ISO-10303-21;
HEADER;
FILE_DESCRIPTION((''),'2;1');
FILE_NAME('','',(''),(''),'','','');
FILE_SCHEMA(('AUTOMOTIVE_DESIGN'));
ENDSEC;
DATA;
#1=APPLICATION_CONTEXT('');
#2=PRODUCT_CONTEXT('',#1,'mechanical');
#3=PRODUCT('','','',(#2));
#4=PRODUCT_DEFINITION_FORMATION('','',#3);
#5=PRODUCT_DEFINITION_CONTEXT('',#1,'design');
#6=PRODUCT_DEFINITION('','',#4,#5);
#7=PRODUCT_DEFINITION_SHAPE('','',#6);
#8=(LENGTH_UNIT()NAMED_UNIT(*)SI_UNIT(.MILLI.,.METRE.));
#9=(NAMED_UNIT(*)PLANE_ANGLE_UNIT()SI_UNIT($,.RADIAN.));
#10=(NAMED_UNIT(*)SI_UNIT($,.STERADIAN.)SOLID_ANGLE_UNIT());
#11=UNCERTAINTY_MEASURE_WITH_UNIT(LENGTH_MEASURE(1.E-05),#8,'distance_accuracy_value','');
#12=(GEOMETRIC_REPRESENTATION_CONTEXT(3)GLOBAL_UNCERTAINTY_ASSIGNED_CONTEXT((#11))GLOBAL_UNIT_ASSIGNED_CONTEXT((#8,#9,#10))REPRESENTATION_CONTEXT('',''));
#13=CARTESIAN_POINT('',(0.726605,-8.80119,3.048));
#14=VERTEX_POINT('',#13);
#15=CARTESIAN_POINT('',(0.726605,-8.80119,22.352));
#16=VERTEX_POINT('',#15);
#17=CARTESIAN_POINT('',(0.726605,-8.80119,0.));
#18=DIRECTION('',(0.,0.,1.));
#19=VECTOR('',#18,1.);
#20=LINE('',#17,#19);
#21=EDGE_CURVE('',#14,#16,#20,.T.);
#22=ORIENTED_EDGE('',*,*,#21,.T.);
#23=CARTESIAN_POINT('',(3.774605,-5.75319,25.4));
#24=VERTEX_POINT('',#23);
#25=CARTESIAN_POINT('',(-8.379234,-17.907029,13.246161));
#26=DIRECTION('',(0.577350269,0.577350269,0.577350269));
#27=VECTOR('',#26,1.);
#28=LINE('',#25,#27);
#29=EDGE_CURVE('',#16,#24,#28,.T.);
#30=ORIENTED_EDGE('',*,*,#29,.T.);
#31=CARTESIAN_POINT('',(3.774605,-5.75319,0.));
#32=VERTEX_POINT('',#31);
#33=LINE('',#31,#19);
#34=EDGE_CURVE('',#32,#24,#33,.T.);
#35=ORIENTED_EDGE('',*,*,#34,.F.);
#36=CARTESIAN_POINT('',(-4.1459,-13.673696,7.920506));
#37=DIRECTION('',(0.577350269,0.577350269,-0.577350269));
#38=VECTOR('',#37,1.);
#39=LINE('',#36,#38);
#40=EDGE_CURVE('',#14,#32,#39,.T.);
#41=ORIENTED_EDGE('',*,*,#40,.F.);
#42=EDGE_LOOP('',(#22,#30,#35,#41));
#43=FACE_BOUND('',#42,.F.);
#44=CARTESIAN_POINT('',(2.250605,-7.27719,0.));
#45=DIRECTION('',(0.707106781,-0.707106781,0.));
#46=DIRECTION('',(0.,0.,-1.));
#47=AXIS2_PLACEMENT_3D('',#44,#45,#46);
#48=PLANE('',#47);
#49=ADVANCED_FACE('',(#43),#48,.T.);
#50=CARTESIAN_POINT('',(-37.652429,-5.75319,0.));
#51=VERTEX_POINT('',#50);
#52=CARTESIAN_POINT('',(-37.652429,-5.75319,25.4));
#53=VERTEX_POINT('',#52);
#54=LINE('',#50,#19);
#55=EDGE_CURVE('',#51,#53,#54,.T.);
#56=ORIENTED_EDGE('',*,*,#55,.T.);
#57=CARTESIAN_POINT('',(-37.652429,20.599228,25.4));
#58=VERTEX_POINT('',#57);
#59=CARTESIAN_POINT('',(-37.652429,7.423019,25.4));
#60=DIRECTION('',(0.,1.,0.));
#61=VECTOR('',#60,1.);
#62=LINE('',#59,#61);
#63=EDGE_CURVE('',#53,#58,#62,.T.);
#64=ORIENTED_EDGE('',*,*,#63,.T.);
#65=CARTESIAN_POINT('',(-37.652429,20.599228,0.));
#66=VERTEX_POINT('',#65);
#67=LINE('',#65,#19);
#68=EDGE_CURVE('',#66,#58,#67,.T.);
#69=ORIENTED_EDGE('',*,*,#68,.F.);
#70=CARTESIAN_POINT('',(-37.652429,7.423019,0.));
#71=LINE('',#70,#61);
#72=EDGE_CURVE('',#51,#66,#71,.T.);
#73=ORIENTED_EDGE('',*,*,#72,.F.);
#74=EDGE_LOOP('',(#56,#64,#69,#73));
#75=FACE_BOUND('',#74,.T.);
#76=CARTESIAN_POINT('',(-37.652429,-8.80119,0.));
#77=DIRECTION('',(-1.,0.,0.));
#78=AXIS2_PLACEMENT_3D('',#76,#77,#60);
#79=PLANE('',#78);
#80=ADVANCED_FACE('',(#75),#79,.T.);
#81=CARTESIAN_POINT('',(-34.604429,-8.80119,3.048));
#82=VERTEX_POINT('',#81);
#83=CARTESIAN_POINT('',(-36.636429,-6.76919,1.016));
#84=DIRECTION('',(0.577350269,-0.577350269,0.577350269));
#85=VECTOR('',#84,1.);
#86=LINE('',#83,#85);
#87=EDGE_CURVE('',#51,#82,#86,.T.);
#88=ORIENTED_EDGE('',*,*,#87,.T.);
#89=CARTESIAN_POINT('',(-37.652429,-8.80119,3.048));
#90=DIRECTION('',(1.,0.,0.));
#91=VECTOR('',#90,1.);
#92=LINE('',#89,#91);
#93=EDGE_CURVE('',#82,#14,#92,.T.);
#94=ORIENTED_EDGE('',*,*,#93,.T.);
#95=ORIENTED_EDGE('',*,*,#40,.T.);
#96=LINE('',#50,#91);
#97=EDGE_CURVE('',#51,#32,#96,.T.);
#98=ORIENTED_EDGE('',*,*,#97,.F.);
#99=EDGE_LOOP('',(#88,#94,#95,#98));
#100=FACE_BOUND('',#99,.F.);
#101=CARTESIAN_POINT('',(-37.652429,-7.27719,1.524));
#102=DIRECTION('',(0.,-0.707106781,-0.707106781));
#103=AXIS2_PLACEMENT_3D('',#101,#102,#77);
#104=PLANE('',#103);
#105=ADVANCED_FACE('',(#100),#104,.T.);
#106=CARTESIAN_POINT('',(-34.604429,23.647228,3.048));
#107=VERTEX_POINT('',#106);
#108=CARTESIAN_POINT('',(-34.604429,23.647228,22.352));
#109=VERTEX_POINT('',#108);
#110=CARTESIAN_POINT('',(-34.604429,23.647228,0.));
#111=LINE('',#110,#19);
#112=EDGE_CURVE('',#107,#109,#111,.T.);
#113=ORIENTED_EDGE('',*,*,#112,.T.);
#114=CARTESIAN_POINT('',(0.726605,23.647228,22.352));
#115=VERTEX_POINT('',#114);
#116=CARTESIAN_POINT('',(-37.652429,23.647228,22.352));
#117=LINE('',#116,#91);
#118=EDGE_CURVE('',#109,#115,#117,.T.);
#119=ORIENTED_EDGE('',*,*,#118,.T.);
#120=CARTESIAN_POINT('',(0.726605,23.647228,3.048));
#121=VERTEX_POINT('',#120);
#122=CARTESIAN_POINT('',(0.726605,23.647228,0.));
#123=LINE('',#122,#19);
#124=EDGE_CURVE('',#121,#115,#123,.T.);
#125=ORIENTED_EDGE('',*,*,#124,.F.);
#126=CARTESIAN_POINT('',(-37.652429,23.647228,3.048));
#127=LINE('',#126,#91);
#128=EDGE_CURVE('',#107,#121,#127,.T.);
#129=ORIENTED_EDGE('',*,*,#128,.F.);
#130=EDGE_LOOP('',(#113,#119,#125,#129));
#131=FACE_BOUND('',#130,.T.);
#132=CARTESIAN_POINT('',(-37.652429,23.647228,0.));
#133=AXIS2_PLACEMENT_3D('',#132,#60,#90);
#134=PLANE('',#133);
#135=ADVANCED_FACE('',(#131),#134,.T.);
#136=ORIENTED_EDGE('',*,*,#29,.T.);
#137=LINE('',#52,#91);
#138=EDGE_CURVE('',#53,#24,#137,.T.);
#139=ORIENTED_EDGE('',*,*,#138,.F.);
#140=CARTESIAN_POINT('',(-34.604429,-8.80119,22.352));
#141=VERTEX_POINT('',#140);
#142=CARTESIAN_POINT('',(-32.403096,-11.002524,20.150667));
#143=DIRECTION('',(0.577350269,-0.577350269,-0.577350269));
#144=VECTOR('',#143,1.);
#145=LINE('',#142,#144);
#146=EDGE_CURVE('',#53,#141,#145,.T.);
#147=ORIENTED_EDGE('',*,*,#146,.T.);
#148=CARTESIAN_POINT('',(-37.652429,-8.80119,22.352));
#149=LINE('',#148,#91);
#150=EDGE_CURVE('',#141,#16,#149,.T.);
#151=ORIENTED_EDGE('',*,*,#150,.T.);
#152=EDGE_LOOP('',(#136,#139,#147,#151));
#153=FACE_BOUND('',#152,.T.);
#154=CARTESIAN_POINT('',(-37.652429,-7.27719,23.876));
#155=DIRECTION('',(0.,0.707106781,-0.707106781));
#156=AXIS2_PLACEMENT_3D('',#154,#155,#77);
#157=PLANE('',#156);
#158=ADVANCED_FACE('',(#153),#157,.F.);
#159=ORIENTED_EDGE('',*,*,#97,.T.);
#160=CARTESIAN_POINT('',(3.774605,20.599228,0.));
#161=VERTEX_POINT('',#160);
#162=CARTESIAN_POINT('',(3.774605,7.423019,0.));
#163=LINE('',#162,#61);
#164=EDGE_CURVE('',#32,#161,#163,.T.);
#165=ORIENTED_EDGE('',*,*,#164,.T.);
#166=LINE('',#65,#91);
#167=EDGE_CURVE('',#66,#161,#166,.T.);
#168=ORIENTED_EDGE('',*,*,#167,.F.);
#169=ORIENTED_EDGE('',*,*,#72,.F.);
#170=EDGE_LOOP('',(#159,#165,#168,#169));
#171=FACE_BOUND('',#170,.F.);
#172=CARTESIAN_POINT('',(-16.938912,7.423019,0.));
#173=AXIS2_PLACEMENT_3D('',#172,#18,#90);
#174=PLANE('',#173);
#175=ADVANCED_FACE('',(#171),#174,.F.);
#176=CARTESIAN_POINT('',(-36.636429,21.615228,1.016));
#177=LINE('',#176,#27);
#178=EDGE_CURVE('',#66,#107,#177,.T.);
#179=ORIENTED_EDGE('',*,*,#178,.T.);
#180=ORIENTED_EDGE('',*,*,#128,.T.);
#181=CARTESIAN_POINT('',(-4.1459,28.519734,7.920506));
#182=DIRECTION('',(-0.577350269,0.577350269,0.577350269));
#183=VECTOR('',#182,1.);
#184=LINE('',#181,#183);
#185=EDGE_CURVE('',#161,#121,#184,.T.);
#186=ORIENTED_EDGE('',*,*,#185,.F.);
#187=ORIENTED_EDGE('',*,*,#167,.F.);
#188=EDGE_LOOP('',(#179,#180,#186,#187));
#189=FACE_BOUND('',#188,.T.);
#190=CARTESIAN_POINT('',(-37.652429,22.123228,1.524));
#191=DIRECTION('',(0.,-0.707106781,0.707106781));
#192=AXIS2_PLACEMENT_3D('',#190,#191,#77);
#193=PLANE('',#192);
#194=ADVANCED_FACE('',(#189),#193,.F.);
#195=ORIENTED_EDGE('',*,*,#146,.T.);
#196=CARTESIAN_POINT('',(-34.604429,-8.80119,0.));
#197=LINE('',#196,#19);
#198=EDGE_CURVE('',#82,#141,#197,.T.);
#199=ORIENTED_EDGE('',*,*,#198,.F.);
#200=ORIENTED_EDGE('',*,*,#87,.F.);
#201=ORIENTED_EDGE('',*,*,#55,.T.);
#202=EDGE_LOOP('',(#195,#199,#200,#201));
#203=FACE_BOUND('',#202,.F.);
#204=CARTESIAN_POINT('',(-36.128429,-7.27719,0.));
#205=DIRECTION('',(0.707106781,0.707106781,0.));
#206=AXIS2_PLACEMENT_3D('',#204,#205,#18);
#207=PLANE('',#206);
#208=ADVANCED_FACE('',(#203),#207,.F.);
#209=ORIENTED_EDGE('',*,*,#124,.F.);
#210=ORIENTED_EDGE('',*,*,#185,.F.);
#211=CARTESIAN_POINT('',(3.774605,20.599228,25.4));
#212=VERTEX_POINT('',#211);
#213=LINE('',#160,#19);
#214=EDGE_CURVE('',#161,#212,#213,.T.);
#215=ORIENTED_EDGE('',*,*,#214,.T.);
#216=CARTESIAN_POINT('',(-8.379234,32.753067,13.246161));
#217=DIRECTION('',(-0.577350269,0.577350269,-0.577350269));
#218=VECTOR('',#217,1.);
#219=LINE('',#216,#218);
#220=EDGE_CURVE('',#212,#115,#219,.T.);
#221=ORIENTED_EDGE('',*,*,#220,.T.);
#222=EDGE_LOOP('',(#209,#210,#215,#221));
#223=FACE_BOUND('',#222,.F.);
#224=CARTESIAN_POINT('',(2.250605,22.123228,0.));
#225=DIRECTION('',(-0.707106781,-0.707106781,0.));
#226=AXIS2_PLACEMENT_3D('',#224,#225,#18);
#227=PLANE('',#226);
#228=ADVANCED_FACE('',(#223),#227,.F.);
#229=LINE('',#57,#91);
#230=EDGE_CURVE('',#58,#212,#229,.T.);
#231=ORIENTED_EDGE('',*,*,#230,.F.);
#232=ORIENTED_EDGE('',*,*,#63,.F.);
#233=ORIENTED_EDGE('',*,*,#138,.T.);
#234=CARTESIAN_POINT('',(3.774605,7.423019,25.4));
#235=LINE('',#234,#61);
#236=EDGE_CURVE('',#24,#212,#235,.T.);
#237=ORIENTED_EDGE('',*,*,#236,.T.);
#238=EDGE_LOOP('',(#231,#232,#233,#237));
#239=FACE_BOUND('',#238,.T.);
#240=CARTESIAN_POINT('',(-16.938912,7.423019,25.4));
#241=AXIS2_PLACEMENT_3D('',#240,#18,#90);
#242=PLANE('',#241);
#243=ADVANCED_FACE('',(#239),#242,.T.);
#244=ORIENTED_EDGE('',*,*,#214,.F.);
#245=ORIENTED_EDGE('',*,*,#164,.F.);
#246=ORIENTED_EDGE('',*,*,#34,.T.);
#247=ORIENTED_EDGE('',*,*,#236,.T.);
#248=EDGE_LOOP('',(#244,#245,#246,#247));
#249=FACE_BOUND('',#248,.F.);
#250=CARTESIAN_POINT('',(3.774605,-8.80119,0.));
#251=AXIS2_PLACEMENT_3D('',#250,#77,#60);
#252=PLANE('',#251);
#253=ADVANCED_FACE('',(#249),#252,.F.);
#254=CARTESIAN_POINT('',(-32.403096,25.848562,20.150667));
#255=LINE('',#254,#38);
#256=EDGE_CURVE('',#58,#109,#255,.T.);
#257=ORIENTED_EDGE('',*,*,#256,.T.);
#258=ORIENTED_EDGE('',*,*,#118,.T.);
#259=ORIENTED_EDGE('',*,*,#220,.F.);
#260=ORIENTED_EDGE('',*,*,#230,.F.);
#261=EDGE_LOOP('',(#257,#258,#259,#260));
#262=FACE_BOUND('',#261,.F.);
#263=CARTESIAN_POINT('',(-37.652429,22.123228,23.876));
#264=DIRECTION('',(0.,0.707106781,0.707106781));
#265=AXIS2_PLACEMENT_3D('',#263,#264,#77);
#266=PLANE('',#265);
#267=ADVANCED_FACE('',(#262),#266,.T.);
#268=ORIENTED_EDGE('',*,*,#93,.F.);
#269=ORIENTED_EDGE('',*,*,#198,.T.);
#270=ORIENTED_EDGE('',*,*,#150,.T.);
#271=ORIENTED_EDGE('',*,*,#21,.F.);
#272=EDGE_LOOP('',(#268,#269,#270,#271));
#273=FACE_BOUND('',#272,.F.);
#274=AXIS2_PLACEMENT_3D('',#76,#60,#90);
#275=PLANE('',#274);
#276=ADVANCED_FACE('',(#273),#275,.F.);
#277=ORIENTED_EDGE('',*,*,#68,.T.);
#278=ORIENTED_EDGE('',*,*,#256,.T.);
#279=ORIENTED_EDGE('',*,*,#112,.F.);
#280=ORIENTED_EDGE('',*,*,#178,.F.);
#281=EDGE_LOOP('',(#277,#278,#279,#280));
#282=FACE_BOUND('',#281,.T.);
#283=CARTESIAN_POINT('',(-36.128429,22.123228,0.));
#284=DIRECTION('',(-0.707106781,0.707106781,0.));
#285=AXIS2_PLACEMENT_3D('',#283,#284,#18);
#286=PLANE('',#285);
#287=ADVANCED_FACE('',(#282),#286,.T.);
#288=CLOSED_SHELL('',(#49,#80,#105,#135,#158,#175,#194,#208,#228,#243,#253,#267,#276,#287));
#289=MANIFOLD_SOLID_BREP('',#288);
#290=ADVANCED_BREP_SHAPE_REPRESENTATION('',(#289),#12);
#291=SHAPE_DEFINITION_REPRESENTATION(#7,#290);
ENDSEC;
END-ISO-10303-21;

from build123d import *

# Parameters (mm, degrees)
F0_W     = 41.4270346519
F0_H     = 32.4484184384
F1_DEPTH = 25.4
F4_SIZE  = 3.048


# Not quite as in the source:
# - the program builds the solid bodies; features that only make, move or delete a surface that nothing else refers to are left out


with BuildPart() as f1:
    # F0 (on Top) → F1 (new body)
    with BuildSketch(Plane.XY):
        with Locations((-16.9389118673, 7.4230190367)):
            Rectangle(F0_W, F0_H)
    extrude(amount=F1_DEPTH)

    # F4
    f4_edges = [f1.edges().sort_by_distance(p)[0] for p in [
        (3.774605, 23.647228, 12.7),
        (-37.652429, 23.647228, 12.7),
        (-16.938912, 23.647228, 0),
        (-16.938912, 23.647228, 25.4),
        (-37.652429, -8.80119, 12.7),
        (3.774605, -8.80119, 12.7),
        (-16.938912, -8.80119, 0),
        (-16.938912, -8.80119, 25.4),
    ]]
    chamfer(f4_edges, length=F4_SIZE)


solid = f1.part
